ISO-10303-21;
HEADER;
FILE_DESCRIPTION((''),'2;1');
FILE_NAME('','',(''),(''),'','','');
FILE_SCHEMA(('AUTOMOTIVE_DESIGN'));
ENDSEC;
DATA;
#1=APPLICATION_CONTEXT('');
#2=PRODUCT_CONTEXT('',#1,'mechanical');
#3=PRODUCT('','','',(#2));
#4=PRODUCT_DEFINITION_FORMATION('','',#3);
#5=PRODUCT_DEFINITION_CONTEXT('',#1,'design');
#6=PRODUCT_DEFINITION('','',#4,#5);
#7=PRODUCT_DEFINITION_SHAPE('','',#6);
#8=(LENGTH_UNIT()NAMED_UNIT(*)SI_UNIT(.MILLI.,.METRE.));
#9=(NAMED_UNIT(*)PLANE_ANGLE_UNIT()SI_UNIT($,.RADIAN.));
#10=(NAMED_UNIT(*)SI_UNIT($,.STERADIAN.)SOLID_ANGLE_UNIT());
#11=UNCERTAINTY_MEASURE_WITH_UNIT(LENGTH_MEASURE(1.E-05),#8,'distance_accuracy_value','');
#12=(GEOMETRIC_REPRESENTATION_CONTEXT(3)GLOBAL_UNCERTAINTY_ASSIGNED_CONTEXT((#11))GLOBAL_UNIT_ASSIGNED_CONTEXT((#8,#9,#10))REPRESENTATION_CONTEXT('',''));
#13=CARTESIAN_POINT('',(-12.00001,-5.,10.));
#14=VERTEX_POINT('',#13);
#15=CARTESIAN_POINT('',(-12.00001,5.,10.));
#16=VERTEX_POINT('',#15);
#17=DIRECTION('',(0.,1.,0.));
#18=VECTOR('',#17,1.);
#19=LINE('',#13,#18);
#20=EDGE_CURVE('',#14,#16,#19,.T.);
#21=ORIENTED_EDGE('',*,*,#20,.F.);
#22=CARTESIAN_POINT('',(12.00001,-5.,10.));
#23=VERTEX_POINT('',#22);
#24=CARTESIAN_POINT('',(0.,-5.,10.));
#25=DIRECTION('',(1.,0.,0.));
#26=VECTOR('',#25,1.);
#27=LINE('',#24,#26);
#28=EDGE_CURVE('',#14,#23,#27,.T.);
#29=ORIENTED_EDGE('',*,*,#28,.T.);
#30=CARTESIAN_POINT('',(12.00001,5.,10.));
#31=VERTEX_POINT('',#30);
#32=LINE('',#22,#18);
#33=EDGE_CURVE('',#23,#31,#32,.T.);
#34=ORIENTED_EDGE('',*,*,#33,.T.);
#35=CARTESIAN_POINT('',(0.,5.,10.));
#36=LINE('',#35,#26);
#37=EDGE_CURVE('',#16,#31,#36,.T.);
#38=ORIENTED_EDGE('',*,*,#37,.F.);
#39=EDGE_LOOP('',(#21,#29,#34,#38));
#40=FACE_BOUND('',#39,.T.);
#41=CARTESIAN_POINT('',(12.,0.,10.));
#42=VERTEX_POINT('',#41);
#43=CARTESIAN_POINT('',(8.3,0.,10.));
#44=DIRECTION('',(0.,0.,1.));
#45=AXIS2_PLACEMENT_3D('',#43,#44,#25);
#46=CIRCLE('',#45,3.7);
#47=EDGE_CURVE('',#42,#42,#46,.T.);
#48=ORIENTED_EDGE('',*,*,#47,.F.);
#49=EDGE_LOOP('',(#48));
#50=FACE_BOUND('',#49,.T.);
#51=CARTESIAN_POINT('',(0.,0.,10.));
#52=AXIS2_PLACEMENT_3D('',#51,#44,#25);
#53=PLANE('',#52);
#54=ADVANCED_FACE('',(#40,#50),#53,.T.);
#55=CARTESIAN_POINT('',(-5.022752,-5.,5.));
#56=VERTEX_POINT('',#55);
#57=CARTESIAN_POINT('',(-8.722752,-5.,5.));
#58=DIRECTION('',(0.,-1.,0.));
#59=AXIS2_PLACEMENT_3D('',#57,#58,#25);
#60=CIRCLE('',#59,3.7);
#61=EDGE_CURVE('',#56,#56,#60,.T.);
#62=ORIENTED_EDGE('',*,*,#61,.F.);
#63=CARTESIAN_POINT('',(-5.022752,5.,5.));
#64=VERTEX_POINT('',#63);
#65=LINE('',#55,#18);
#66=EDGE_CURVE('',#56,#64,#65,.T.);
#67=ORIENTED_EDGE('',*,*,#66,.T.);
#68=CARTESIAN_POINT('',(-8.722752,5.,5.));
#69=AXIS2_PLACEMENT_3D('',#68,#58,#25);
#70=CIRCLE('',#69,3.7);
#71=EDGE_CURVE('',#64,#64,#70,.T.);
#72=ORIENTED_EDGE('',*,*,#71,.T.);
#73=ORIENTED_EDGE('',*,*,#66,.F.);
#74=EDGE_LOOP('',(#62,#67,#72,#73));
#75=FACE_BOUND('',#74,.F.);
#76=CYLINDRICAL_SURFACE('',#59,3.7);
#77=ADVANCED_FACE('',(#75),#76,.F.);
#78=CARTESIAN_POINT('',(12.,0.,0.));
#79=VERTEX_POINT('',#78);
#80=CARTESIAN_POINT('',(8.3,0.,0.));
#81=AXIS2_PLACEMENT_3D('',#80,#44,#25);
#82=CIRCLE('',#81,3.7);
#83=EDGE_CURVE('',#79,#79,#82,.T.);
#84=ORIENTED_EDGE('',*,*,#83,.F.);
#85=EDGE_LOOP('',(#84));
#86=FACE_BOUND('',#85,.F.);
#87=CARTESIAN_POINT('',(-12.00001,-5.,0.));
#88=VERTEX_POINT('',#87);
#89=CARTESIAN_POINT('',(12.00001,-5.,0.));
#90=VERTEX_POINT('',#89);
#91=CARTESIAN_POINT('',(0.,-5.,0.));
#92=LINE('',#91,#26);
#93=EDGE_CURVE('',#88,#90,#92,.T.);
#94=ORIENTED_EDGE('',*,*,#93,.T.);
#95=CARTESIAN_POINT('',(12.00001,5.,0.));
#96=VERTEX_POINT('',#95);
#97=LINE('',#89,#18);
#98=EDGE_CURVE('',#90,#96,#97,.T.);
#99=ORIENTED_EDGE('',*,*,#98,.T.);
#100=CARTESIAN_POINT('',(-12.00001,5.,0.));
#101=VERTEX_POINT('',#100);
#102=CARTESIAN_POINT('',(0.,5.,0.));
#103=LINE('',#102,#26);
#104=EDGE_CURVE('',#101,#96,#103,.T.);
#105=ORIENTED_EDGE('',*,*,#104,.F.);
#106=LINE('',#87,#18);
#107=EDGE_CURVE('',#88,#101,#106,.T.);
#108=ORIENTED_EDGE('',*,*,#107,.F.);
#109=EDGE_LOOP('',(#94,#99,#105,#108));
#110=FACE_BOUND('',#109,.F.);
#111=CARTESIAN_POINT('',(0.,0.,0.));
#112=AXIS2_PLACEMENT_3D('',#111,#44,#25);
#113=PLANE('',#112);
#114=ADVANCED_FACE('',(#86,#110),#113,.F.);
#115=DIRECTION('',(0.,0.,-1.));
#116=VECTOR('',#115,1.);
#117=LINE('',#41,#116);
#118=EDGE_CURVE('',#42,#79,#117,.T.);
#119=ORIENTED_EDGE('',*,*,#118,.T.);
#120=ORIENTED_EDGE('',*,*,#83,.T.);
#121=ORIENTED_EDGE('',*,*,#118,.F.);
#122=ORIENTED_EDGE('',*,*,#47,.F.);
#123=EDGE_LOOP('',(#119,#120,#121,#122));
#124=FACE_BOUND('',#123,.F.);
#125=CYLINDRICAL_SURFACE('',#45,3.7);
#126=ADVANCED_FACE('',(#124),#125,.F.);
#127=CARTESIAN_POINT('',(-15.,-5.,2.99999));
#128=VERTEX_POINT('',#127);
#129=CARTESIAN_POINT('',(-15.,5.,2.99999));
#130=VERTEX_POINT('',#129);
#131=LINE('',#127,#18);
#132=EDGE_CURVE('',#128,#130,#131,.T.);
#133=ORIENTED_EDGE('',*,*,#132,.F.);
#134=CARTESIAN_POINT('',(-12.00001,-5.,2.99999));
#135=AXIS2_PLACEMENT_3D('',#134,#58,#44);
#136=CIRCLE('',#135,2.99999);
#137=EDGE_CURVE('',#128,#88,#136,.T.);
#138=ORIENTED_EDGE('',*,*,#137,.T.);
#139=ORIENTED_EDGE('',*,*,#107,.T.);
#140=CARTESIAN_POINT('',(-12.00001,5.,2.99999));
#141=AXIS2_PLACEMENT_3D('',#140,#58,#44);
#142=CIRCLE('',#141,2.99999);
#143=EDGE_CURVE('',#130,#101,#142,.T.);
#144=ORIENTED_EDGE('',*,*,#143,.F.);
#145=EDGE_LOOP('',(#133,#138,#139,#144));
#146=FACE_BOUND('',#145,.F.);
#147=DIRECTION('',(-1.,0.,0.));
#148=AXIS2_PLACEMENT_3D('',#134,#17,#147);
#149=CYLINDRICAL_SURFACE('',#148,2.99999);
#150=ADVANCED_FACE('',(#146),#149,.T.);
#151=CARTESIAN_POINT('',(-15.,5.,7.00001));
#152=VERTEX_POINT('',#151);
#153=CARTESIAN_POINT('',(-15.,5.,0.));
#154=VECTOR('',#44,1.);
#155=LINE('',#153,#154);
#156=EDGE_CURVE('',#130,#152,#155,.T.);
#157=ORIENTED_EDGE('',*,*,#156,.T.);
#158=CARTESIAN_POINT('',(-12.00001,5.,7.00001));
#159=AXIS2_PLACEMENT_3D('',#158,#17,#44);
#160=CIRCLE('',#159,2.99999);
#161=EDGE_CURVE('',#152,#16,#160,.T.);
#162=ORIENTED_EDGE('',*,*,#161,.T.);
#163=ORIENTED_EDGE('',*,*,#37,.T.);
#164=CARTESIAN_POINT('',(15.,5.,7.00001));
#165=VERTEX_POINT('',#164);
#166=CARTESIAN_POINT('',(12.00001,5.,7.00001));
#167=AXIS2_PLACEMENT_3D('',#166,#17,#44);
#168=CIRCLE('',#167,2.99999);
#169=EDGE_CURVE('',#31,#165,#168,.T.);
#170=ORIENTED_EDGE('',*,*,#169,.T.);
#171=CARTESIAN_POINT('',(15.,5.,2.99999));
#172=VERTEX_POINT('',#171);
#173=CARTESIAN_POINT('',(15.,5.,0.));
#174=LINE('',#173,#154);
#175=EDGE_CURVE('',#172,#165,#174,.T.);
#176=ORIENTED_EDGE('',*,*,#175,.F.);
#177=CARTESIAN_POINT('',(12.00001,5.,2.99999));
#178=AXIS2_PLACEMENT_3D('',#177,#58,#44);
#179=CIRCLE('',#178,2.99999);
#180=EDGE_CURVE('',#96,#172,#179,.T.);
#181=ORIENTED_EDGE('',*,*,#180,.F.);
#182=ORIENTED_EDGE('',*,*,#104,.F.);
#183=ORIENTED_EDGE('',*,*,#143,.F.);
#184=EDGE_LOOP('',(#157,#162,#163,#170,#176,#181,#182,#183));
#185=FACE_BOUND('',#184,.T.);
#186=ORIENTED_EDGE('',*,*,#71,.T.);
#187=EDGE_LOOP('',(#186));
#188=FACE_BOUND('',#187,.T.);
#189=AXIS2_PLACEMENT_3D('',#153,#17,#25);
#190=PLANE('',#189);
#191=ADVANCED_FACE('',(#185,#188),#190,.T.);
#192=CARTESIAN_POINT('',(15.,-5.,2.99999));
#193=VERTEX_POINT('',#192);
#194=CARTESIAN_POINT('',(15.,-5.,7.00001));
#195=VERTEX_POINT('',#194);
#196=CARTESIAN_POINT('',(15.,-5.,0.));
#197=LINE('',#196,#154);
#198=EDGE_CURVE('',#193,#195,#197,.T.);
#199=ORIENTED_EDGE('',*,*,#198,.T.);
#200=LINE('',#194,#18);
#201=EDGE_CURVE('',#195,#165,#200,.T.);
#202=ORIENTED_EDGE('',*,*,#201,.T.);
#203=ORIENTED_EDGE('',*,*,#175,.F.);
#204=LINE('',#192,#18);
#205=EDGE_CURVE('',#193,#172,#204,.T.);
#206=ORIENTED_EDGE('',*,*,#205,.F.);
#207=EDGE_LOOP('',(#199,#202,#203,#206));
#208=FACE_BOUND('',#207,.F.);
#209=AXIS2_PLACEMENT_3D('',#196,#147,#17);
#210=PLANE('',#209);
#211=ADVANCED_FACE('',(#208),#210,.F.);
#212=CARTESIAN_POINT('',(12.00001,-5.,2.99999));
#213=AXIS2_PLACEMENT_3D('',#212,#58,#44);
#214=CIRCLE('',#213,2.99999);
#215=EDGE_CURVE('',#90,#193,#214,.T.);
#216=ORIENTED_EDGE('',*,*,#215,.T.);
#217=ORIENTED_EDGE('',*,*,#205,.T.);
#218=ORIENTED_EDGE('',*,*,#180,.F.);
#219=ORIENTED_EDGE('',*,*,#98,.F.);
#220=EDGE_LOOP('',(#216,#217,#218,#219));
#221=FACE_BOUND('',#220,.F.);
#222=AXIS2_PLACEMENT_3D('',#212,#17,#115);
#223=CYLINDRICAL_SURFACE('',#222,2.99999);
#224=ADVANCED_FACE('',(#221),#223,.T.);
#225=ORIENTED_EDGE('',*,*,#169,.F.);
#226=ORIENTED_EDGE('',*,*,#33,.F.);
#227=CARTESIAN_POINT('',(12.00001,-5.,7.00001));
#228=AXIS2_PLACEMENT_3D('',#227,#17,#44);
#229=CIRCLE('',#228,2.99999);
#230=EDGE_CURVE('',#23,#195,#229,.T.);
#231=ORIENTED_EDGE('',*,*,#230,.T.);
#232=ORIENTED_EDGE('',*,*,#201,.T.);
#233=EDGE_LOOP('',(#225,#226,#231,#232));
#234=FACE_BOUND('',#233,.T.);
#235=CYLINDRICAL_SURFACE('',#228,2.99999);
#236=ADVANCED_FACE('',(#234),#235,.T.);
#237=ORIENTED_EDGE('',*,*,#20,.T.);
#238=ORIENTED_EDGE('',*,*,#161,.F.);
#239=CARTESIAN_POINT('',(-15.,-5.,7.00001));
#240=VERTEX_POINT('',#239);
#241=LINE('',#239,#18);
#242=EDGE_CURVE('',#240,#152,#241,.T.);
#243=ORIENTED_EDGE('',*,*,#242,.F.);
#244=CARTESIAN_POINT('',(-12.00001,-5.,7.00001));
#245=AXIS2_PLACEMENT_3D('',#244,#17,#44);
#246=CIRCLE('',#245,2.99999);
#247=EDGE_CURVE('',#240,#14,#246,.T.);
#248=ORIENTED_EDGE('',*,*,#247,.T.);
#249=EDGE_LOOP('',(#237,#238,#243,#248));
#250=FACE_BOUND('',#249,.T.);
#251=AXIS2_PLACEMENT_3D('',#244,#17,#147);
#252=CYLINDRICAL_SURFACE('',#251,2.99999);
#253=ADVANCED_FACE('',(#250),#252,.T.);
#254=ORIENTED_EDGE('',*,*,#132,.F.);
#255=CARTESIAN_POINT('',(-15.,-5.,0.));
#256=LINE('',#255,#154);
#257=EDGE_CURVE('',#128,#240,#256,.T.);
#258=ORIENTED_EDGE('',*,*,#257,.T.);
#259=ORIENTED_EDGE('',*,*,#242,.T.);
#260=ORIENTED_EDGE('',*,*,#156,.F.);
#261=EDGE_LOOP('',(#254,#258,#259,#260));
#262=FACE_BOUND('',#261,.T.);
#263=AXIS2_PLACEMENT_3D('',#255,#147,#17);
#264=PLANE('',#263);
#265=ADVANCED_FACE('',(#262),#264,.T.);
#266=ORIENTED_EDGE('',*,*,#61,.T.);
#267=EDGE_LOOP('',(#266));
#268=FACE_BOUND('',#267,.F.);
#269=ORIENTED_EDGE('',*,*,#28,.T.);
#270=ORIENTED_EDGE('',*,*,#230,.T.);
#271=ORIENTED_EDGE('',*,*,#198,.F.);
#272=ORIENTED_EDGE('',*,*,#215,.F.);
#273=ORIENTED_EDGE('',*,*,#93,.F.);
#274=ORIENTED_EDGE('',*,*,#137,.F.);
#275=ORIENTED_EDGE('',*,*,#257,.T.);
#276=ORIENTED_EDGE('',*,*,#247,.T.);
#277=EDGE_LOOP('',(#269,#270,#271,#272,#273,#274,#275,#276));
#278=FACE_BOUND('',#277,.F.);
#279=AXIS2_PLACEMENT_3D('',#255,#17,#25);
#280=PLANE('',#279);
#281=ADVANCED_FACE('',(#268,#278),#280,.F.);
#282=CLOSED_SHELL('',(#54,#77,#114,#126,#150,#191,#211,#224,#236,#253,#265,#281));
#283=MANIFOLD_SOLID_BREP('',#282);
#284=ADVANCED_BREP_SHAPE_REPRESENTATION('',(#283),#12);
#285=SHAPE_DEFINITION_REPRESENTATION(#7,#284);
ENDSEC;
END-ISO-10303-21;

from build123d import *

# Parameters (mm, degrees)
F0_W     = 30
F0_H     = 10
F1_DEPTH = 10
F2_R     = 3.7
F3_DEPTH = 10
F4_R     = 3.7
F5_DEPTH = 10
F6_R     = 2.99999


# Not quite as in the source:
# - a fillet or chamfer is up to 0.001 mm smaller than in the source, because OpenCascade refuses the exact size


with BuildPart() as f1:
    # F0 (on Top) → F1 (new body)
    with BuildSketch(Plane.XY):
        Rectangle(F0_W, F0_H)
    extrude(amount=F1_DEPTH)

    # F2 (on face) → F3 (cut, through all)
    with BuildSketch(Plane.XY.offset(10)):
        with Locations((8.3, 0)):
            Circle(F2_R)
    extrude(amount=-F3_DEPTH, mode=Mode.SUBTRACT)

    # F4 (on face) → F5 (cut, through all)
    with BuildSketch(Plane.XZ.offset(5)):
        with Locations((-8.7227521392, 5)):
            Circle(F4_R)
    extrude(amount=-F5_DEPTH, mode=Mode.SUBTRACT)

    # F6 (radius 3 in the source; OpenCascade refuses exactly that, so slightly less here)
    f6_edges = [f1.edges().sort_by_distance(p)[0] for p in [
        (-15, 0, 10),
        (15, 0, 10),
        (15, 0, 0),
        (-15, 0, 0),
    ]]
    fillet(f6_edges, radius=F6_R)


solid = f1.part
